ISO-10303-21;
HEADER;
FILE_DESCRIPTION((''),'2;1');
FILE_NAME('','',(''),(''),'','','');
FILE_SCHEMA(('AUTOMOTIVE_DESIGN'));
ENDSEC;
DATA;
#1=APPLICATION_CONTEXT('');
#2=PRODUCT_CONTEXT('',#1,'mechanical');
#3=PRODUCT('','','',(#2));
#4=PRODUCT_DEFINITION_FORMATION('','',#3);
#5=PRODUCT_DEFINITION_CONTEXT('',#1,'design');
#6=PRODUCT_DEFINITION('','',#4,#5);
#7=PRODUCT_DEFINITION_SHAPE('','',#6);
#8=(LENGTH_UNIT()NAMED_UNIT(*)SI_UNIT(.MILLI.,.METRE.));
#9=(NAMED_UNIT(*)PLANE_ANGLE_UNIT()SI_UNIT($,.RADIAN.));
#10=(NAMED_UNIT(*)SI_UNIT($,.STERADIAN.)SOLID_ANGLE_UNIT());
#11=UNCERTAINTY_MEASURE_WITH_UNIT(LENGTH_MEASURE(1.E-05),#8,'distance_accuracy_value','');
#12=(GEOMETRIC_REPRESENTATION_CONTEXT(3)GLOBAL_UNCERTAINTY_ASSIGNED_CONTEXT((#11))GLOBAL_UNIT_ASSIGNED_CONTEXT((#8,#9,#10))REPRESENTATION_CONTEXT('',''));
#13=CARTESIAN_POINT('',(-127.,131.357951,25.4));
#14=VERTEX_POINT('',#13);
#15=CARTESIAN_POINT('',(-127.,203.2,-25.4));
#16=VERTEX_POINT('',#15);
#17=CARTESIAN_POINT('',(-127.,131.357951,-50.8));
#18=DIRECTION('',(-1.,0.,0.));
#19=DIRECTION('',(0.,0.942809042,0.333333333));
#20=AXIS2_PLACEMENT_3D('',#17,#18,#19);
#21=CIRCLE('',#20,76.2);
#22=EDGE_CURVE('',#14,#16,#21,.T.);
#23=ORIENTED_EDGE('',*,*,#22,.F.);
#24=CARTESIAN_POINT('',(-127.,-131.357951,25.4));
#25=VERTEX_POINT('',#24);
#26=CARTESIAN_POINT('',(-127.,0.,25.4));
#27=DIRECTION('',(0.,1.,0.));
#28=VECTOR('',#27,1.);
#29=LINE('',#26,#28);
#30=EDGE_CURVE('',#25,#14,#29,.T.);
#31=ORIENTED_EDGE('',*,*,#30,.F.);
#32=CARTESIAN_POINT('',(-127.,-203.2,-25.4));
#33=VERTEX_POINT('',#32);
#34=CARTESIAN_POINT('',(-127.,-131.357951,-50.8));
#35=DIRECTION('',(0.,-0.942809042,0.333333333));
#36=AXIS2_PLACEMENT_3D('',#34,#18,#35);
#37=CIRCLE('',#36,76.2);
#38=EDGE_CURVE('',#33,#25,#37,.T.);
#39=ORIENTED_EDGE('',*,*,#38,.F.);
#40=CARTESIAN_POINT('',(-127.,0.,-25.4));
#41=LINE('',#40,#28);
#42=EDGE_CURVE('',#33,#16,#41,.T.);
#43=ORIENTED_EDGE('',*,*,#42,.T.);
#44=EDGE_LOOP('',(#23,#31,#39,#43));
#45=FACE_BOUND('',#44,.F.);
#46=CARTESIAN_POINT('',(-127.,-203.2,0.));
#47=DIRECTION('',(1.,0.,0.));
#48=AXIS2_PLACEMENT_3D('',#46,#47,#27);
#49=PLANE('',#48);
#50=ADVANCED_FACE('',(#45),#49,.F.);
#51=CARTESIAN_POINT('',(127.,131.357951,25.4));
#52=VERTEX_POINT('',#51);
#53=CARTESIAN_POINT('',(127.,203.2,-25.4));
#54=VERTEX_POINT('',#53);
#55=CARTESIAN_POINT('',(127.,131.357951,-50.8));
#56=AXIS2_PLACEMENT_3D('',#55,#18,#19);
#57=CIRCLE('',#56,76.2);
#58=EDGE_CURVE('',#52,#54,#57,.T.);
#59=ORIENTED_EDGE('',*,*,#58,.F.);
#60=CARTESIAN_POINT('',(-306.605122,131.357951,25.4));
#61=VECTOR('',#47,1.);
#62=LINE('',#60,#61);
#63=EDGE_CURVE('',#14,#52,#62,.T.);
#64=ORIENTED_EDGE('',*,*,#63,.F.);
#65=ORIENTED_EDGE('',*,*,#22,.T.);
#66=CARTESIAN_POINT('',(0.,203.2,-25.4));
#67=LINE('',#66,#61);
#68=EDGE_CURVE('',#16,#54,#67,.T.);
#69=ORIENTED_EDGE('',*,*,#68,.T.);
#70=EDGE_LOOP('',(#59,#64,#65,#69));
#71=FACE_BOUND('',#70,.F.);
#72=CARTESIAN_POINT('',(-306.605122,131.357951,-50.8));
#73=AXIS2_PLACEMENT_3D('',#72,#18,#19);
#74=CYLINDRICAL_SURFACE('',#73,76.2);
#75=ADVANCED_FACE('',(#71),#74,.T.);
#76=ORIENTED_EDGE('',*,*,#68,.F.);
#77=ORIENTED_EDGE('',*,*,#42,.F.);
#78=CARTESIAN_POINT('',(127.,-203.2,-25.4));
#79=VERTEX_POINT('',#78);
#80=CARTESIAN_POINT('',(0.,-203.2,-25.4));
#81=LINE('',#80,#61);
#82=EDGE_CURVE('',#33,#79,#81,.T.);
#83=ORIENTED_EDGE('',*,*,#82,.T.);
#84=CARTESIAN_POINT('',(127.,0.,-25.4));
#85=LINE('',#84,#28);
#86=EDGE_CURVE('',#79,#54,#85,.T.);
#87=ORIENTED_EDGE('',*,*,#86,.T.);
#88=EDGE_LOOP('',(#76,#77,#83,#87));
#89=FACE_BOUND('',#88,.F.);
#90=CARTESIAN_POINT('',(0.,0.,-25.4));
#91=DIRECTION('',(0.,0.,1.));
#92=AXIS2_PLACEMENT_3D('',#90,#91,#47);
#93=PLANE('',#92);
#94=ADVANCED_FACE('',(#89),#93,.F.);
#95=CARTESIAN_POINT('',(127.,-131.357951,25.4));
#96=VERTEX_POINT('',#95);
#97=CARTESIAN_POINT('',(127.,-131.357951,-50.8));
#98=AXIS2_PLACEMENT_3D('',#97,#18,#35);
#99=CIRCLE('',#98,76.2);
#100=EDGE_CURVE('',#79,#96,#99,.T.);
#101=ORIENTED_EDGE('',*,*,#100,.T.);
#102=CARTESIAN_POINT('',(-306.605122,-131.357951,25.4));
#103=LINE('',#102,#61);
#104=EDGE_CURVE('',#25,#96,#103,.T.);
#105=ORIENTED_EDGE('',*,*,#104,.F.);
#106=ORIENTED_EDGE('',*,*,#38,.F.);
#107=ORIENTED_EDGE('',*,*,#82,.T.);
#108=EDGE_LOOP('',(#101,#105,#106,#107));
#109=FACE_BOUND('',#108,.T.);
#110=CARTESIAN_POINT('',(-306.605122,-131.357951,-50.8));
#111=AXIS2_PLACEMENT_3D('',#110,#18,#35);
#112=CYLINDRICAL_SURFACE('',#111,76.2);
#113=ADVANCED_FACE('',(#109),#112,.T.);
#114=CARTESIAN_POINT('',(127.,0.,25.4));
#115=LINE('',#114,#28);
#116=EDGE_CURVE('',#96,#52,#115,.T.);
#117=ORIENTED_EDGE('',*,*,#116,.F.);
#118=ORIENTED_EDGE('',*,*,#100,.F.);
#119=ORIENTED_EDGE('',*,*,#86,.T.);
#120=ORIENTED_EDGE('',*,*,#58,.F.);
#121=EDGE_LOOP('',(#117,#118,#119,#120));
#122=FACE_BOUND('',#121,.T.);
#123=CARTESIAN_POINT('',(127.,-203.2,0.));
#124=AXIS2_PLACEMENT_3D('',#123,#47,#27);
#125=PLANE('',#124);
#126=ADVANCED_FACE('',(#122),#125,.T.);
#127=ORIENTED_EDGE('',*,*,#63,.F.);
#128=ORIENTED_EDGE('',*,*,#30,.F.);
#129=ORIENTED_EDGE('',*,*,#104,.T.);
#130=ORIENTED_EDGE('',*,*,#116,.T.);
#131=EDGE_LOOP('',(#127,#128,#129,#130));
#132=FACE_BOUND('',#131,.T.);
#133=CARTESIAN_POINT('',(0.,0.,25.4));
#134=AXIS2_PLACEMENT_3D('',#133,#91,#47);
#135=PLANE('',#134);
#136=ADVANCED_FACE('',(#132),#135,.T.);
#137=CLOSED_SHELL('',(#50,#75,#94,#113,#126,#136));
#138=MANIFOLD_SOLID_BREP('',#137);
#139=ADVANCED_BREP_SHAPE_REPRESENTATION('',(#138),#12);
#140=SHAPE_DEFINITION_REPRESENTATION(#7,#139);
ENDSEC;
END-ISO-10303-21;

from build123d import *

# Parameters (mm, degrees)
F0_W        = 254
F0_H        = 406.4
F1_DEPTH    = 25.4
F2_T1_DEPTH = 613.2102448428


# Not quite as in the source:
# - a fillet or chamfer that OpenCascade refuses, or shapes differently, is made with other operations: its cross-section is extruded or revolved along the edge and cut away or added


with BuildPart() as f1:
    # F0 (on Top) → F1 (new body, symmetric)
    with BuildSketch(Plane.XY):
        Rectangle(F0_W, F0_H)
    extrude(amount=F1_DEPTH, both=True)

    # F2: fillet of radius 76.2 on 2 edges, made by hand

    # F2_s2 → F2_t1 (cut)
    with BuildSketch(Plane.YZ.offset(-306.6051224214)):
        with BuildLine():
            ThreePointArc((203.2, -25.4), (175.3520415437, 11.4170394667), (131.3579510314, 25.4))
            Line((131.3579510314, 25.4), (203.2, 25.4))
            Line((203.2, 25.4), (203.2, -25.4))
        make_face()
        with BuildLine():
            ThreePointArc((-203.2, -25.4), (-175.3520415437, 11.4170394667), (-131.3579510314, 25.4))
            Line((-131.3579510314, 25.4), (-203.2, 25.4))
            Line((-203.2, 25.4), (-203.2, -25.4))
        make_face()
    extrude(amount=F2_T1_DEPTH, mode=Mode.SUBTRACT)


solid = f1.part
